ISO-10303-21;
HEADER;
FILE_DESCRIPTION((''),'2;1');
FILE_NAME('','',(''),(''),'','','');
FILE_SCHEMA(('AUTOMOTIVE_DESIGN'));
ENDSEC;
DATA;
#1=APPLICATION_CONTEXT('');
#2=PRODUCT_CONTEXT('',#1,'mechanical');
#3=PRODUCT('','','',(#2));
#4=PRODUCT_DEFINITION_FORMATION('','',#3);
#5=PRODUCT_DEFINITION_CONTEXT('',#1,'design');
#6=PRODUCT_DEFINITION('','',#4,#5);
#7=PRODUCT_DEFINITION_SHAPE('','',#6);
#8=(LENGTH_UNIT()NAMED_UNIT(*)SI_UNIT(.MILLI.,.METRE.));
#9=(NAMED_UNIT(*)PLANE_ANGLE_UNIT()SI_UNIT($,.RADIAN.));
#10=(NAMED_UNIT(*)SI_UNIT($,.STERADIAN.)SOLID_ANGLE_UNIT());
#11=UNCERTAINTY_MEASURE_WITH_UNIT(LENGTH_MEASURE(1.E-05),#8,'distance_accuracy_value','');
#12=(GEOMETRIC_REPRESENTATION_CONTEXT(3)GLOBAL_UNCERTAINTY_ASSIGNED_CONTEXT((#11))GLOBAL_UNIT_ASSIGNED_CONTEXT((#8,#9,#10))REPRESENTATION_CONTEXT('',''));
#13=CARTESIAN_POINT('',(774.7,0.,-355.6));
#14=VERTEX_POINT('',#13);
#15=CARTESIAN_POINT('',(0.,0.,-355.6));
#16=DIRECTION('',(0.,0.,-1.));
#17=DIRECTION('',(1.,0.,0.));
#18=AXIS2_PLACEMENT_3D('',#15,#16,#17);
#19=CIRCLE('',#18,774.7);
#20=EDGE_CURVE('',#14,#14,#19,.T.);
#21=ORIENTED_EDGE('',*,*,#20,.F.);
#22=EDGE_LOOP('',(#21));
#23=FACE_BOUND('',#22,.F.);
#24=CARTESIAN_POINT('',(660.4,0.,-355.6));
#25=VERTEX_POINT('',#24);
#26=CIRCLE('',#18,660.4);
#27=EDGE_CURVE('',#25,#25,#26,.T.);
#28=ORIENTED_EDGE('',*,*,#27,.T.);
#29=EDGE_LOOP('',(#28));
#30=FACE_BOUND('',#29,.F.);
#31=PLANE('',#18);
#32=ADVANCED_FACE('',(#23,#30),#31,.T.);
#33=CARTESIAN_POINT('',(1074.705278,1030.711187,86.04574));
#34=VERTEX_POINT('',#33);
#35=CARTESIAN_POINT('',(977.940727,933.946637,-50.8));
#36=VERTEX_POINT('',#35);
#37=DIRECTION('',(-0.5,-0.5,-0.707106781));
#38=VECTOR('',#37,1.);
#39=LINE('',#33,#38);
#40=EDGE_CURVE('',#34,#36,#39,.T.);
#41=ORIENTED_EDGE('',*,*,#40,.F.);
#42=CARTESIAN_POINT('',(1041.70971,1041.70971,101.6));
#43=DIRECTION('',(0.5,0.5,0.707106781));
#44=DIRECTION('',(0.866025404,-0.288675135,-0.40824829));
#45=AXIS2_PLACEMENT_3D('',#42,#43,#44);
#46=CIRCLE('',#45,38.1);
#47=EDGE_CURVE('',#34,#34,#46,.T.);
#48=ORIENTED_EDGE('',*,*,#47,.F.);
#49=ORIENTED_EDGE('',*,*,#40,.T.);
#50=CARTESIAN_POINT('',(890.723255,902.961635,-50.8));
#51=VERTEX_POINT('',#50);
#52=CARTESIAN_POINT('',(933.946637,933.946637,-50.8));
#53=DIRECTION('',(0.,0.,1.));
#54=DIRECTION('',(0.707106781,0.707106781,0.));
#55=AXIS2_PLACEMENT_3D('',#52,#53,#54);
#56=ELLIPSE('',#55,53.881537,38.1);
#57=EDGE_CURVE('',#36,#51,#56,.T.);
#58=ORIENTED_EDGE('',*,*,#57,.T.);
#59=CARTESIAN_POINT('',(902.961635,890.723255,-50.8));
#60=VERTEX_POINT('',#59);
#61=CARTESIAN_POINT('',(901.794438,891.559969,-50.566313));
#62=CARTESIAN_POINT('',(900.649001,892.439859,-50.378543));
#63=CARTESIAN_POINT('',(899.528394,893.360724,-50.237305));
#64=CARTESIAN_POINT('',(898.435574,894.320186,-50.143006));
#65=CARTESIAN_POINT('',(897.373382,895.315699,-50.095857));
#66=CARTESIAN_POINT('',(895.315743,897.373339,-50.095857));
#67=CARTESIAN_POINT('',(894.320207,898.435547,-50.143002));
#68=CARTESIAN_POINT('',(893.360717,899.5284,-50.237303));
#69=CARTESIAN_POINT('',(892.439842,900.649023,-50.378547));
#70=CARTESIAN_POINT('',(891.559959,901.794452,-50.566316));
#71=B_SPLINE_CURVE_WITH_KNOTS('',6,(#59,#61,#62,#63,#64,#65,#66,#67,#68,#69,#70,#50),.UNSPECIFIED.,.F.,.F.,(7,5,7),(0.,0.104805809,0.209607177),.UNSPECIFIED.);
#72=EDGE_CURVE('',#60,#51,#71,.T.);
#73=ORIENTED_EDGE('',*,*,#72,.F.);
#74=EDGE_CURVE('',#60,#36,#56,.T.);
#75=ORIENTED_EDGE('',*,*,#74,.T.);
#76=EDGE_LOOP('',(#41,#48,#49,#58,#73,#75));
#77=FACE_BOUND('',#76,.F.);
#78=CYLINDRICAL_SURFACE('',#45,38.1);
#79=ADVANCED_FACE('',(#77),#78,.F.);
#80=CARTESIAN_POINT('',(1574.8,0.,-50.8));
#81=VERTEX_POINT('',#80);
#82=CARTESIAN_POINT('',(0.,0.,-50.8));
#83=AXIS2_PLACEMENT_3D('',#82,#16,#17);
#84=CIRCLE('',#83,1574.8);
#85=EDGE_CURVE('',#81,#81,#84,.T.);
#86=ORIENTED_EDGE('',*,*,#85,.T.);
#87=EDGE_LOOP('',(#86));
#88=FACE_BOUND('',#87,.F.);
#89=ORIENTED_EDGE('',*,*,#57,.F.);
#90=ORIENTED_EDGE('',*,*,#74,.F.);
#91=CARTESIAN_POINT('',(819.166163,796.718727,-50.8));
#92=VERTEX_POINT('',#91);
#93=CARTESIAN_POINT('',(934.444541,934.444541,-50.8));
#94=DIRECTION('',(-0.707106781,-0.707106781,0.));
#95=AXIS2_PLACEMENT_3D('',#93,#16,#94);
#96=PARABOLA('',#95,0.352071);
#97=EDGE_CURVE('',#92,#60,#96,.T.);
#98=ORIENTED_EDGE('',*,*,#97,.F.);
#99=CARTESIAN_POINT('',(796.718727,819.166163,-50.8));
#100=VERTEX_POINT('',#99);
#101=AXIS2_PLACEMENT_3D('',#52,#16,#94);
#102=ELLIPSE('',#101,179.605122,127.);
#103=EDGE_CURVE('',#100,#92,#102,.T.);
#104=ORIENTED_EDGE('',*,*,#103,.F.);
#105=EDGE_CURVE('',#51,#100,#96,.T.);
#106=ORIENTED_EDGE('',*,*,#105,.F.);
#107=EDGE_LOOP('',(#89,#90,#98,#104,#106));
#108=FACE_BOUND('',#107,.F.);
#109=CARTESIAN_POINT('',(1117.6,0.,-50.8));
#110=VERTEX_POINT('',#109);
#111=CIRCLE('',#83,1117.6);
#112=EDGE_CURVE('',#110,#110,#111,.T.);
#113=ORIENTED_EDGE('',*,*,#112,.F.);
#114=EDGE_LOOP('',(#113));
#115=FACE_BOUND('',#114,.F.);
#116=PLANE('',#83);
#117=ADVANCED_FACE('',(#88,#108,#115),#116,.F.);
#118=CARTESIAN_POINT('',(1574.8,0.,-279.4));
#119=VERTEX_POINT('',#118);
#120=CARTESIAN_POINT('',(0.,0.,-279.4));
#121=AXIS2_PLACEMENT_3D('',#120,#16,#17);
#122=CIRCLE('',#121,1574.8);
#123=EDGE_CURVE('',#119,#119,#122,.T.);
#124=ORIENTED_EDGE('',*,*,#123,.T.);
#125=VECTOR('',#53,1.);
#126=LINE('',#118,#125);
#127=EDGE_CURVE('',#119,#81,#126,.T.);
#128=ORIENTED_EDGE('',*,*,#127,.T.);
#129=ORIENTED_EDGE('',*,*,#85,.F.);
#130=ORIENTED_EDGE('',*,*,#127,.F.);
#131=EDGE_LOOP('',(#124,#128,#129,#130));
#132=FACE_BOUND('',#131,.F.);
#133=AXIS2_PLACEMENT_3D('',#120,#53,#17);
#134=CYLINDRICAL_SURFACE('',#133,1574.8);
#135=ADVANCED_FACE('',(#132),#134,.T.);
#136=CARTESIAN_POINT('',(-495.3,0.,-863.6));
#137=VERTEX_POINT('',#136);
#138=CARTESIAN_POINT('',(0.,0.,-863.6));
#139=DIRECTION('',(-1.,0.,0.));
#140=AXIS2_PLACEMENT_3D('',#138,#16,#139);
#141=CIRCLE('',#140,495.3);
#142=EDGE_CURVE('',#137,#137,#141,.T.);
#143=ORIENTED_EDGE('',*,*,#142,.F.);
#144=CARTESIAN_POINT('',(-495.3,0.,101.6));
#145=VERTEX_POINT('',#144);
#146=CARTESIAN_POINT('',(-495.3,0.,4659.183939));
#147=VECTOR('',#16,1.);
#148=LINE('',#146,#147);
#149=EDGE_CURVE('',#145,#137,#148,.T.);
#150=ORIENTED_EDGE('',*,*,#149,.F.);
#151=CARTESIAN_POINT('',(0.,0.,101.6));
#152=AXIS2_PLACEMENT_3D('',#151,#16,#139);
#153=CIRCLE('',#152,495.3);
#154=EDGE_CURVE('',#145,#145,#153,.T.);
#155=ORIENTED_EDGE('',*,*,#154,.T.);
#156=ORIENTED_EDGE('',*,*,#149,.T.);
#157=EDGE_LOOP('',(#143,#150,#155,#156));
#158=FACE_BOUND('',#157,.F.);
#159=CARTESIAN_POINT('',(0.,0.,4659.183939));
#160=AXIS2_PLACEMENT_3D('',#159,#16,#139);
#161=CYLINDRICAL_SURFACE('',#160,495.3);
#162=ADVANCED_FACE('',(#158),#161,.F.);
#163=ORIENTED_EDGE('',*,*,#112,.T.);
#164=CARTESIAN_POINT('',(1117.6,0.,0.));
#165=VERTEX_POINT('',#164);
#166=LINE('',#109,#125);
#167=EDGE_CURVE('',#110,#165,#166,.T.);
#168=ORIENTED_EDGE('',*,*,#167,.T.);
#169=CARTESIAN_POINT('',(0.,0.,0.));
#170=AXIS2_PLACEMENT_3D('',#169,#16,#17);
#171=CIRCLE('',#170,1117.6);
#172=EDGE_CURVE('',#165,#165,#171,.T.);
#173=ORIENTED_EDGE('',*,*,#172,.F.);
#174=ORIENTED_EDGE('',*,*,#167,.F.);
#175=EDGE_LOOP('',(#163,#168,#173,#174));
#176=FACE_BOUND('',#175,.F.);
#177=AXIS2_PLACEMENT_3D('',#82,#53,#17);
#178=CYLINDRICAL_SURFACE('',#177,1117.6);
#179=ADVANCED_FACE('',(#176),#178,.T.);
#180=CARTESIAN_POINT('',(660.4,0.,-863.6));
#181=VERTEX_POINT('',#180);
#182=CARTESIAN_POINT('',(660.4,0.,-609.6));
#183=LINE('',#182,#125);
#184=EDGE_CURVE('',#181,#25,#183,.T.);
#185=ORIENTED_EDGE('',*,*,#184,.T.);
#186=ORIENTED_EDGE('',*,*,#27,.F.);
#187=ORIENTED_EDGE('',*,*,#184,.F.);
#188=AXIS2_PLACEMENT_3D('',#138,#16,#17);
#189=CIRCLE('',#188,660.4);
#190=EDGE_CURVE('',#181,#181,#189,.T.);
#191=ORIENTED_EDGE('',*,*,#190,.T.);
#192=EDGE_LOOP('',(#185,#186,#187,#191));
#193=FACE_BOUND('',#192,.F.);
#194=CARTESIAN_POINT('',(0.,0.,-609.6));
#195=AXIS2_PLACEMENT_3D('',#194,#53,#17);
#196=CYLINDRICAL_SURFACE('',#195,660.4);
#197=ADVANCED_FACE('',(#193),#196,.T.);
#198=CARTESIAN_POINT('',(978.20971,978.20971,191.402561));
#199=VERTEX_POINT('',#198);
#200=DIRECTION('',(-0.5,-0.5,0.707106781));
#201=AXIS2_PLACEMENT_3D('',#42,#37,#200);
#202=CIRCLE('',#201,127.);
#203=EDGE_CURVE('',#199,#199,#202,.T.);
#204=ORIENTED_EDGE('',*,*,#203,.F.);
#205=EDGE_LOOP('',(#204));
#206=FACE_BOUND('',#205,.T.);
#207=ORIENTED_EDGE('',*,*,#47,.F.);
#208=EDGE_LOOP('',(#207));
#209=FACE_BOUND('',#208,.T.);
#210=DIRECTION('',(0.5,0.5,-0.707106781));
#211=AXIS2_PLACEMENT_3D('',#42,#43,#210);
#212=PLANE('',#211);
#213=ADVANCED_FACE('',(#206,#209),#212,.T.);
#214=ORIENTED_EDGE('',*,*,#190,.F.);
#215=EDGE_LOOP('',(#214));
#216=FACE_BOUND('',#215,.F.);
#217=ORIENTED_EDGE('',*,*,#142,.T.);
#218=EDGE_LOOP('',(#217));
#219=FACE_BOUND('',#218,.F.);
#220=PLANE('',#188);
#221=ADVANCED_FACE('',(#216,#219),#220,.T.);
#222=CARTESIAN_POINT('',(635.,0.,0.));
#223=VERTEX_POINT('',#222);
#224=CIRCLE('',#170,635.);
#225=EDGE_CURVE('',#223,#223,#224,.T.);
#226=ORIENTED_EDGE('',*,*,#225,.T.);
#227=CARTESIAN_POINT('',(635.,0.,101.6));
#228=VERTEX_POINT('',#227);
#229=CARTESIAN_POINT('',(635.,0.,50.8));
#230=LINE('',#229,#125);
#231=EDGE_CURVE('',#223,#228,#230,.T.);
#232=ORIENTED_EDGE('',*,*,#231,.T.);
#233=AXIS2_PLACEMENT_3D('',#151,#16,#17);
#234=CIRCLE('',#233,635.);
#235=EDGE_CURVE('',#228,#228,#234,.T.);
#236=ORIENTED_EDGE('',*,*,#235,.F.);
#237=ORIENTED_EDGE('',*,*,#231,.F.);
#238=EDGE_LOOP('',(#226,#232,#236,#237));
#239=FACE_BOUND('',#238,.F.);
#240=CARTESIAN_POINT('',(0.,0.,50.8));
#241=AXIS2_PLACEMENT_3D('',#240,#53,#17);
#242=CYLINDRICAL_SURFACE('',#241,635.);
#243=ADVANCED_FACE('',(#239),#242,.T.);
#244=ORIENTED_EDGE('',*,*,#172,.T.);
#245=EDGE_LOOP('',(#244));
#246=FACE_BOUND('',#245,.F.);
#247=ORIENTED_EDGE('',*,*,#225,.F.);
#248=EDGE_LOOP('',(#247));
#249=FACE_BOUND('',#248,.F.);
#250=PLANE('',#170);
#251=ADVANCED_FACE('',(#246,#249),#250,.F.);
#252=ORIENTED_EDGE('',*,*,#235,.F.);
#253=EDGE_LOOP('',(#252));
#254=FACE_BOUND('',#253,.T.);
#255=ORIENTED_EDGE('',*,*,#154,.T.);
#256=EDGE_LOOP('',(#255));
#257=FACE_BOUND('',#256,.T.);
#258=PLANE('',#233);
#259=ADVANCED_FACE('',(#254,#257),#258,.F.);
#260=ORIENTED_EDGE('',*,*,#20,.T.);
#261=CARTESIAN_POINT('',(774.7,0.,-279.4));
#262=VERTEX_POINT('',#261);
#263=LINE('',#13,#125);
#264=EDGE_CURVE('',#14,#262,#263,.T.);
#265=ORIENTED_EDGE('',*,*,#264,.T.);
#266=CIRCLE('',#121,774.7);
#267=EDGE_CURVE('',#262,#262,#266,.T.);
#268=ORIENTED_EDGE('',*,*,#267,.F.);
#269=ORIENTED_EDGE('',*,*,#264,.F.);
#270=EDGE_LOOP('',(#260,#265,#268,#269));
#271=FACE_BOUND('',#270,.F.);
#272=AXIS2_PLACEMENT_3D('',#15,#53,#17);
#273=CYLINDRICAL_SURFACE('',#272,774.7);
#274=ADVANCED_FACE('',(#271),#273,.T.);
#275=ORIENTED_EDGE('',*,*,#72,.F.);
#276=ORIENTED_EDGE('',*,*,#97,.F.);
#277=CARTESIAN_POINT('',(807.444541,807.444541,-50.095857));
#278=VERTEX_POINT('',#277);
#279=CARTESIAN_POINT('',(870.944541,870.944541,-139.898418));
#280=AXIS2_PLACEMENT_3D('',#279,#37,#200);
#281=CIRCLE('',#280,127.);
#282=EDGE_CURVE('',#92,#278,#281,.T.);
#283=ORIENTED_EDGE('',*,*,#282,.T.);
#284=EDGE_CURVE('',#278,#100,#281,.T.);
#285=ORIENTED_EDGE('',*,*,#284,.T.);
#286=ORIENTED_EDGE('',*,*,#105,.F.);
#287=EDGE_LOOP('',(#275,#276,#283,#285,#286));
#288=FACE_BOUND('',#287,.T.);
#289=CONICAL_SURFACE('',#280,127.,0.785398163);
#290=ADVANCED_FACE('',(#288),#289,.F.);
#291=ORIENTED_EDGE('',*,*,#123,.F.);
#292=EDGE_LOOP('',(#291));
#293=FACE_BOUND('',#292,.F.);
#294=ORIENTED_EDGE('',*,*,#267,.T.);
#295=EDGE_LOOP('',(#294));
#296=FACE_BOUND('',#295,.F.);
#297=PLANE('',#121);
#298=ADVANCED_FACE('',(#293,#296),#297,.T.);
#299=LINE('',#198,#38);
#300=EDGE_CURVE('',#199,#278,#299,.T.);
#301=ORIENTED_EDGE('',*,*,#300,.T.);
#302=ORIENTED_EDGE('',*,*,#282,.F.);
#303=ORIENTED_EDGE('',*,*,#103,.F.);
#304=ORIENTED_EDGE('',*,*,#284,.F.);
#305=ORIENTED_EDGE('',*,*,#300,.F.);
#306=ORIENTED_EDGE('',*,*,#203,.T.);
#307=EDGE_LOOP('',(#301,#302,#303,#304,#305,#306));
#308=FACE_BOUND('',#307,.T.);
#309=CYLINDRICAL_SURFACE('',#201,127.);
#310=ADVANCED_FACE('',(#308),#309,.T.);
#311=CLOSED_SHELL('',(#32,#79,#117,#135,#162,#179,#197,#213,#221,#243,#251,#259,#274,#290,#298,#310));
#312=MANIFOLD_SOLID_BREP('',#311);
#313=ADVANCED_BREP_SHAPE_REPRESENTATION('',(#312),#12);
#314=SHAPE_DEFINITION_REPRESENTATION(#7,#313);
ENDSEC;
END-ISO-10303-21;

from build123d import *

# Parameters (mm, degrees)
F0_W      = 635
F0_H      = 101.6
F0_W_2    = 660.4
F0_H_2    = 508
F3_D      = 990.6
F9_R      = 38.1
F10_REACH = 3406.7732486981


# Not quite as in the source:
# - a feature names something its author has since deleted; it is built from what else it names


with BuildPart() as f1:
    # F0 (on Front) → F1 (revolve)
    with BuildSketch(Plane.XZ):
        with Locations((317.5, 50.8)):
            Rectangle(F0_W, F0_H)
        Polygon((635, 0), (0, 0), (0, -50.8), (1117.6, -50.8), (1117.6, 0), align=None)
        Polygon((1117.6, -50.8), (0, -50.8), (0, -279.4), (774.7, -279.4), (1574.8, -279.4), (1574.8, -50.8), align=None)
        Polygon((774.7, -279.4), (0, -279.4), (0, -355.6), (660.4, -355.6), (774.7, -355.6), align=None)
        with Locations((330.2, -609.6)):
            Rectangle(F0_W_2, F0_H_2)
    revolve(axis=Axis((0, 0, -260.6765925884), (0, 0, -1)))

    # F3 (through all)
    with Locations(Plane.XY.offset(101.6)):
        with Locations((0, 0)):
            Hole(F3_D / 2)

    # F6 (on face) → F7 (revolve)
    with BuildSketch(Plane(origin=(0, 0, 0), x_dir=(0.7071067812, 0.7071067812, 0), z_dir=(0.7071067812, -0.7071067812, 0))):
        Polygon((1321.5041428375, -50.0958571625), (1473.2, 101.6), (1383.3974387893, 191.4025612107), (1141.8990204161, -50.0958571625), align=None)
    revolve(axis=Axis((867.2468509569, 867.2468509569, -145.1277414514), (-0.5, -0.5, -0.7071067812)))

    f10_end = Plane(origin=(-16.75319514, -16.75319514, -50.8), x_dir=(1, 0, 0), z_dir=(0, 0, 1))
    # F9 (on face) → F10 (cut, up to a plane its end follows)
    with BuildSketch(Plane(origin=(556.7758795063, 556.7758795063, 787.4), x_dir=(0.8660254038, -0.2886751346, -0.4082482905), z_dir=(0.5, 0.5, 0.7071067812))):
        with Locations((559.9533552002, 791.8936292205)):
            Circle(F9_R)
    f10_long = extrude(amount=-F10_REACH, mode=Mode.PRIVATE)
    add(split(f10_long, bisect_by=f10_end, keep=Keep.TOP, mode=Mode.PRIVATE), mode=Mode.SUBTRACT)


solid = f1.part
